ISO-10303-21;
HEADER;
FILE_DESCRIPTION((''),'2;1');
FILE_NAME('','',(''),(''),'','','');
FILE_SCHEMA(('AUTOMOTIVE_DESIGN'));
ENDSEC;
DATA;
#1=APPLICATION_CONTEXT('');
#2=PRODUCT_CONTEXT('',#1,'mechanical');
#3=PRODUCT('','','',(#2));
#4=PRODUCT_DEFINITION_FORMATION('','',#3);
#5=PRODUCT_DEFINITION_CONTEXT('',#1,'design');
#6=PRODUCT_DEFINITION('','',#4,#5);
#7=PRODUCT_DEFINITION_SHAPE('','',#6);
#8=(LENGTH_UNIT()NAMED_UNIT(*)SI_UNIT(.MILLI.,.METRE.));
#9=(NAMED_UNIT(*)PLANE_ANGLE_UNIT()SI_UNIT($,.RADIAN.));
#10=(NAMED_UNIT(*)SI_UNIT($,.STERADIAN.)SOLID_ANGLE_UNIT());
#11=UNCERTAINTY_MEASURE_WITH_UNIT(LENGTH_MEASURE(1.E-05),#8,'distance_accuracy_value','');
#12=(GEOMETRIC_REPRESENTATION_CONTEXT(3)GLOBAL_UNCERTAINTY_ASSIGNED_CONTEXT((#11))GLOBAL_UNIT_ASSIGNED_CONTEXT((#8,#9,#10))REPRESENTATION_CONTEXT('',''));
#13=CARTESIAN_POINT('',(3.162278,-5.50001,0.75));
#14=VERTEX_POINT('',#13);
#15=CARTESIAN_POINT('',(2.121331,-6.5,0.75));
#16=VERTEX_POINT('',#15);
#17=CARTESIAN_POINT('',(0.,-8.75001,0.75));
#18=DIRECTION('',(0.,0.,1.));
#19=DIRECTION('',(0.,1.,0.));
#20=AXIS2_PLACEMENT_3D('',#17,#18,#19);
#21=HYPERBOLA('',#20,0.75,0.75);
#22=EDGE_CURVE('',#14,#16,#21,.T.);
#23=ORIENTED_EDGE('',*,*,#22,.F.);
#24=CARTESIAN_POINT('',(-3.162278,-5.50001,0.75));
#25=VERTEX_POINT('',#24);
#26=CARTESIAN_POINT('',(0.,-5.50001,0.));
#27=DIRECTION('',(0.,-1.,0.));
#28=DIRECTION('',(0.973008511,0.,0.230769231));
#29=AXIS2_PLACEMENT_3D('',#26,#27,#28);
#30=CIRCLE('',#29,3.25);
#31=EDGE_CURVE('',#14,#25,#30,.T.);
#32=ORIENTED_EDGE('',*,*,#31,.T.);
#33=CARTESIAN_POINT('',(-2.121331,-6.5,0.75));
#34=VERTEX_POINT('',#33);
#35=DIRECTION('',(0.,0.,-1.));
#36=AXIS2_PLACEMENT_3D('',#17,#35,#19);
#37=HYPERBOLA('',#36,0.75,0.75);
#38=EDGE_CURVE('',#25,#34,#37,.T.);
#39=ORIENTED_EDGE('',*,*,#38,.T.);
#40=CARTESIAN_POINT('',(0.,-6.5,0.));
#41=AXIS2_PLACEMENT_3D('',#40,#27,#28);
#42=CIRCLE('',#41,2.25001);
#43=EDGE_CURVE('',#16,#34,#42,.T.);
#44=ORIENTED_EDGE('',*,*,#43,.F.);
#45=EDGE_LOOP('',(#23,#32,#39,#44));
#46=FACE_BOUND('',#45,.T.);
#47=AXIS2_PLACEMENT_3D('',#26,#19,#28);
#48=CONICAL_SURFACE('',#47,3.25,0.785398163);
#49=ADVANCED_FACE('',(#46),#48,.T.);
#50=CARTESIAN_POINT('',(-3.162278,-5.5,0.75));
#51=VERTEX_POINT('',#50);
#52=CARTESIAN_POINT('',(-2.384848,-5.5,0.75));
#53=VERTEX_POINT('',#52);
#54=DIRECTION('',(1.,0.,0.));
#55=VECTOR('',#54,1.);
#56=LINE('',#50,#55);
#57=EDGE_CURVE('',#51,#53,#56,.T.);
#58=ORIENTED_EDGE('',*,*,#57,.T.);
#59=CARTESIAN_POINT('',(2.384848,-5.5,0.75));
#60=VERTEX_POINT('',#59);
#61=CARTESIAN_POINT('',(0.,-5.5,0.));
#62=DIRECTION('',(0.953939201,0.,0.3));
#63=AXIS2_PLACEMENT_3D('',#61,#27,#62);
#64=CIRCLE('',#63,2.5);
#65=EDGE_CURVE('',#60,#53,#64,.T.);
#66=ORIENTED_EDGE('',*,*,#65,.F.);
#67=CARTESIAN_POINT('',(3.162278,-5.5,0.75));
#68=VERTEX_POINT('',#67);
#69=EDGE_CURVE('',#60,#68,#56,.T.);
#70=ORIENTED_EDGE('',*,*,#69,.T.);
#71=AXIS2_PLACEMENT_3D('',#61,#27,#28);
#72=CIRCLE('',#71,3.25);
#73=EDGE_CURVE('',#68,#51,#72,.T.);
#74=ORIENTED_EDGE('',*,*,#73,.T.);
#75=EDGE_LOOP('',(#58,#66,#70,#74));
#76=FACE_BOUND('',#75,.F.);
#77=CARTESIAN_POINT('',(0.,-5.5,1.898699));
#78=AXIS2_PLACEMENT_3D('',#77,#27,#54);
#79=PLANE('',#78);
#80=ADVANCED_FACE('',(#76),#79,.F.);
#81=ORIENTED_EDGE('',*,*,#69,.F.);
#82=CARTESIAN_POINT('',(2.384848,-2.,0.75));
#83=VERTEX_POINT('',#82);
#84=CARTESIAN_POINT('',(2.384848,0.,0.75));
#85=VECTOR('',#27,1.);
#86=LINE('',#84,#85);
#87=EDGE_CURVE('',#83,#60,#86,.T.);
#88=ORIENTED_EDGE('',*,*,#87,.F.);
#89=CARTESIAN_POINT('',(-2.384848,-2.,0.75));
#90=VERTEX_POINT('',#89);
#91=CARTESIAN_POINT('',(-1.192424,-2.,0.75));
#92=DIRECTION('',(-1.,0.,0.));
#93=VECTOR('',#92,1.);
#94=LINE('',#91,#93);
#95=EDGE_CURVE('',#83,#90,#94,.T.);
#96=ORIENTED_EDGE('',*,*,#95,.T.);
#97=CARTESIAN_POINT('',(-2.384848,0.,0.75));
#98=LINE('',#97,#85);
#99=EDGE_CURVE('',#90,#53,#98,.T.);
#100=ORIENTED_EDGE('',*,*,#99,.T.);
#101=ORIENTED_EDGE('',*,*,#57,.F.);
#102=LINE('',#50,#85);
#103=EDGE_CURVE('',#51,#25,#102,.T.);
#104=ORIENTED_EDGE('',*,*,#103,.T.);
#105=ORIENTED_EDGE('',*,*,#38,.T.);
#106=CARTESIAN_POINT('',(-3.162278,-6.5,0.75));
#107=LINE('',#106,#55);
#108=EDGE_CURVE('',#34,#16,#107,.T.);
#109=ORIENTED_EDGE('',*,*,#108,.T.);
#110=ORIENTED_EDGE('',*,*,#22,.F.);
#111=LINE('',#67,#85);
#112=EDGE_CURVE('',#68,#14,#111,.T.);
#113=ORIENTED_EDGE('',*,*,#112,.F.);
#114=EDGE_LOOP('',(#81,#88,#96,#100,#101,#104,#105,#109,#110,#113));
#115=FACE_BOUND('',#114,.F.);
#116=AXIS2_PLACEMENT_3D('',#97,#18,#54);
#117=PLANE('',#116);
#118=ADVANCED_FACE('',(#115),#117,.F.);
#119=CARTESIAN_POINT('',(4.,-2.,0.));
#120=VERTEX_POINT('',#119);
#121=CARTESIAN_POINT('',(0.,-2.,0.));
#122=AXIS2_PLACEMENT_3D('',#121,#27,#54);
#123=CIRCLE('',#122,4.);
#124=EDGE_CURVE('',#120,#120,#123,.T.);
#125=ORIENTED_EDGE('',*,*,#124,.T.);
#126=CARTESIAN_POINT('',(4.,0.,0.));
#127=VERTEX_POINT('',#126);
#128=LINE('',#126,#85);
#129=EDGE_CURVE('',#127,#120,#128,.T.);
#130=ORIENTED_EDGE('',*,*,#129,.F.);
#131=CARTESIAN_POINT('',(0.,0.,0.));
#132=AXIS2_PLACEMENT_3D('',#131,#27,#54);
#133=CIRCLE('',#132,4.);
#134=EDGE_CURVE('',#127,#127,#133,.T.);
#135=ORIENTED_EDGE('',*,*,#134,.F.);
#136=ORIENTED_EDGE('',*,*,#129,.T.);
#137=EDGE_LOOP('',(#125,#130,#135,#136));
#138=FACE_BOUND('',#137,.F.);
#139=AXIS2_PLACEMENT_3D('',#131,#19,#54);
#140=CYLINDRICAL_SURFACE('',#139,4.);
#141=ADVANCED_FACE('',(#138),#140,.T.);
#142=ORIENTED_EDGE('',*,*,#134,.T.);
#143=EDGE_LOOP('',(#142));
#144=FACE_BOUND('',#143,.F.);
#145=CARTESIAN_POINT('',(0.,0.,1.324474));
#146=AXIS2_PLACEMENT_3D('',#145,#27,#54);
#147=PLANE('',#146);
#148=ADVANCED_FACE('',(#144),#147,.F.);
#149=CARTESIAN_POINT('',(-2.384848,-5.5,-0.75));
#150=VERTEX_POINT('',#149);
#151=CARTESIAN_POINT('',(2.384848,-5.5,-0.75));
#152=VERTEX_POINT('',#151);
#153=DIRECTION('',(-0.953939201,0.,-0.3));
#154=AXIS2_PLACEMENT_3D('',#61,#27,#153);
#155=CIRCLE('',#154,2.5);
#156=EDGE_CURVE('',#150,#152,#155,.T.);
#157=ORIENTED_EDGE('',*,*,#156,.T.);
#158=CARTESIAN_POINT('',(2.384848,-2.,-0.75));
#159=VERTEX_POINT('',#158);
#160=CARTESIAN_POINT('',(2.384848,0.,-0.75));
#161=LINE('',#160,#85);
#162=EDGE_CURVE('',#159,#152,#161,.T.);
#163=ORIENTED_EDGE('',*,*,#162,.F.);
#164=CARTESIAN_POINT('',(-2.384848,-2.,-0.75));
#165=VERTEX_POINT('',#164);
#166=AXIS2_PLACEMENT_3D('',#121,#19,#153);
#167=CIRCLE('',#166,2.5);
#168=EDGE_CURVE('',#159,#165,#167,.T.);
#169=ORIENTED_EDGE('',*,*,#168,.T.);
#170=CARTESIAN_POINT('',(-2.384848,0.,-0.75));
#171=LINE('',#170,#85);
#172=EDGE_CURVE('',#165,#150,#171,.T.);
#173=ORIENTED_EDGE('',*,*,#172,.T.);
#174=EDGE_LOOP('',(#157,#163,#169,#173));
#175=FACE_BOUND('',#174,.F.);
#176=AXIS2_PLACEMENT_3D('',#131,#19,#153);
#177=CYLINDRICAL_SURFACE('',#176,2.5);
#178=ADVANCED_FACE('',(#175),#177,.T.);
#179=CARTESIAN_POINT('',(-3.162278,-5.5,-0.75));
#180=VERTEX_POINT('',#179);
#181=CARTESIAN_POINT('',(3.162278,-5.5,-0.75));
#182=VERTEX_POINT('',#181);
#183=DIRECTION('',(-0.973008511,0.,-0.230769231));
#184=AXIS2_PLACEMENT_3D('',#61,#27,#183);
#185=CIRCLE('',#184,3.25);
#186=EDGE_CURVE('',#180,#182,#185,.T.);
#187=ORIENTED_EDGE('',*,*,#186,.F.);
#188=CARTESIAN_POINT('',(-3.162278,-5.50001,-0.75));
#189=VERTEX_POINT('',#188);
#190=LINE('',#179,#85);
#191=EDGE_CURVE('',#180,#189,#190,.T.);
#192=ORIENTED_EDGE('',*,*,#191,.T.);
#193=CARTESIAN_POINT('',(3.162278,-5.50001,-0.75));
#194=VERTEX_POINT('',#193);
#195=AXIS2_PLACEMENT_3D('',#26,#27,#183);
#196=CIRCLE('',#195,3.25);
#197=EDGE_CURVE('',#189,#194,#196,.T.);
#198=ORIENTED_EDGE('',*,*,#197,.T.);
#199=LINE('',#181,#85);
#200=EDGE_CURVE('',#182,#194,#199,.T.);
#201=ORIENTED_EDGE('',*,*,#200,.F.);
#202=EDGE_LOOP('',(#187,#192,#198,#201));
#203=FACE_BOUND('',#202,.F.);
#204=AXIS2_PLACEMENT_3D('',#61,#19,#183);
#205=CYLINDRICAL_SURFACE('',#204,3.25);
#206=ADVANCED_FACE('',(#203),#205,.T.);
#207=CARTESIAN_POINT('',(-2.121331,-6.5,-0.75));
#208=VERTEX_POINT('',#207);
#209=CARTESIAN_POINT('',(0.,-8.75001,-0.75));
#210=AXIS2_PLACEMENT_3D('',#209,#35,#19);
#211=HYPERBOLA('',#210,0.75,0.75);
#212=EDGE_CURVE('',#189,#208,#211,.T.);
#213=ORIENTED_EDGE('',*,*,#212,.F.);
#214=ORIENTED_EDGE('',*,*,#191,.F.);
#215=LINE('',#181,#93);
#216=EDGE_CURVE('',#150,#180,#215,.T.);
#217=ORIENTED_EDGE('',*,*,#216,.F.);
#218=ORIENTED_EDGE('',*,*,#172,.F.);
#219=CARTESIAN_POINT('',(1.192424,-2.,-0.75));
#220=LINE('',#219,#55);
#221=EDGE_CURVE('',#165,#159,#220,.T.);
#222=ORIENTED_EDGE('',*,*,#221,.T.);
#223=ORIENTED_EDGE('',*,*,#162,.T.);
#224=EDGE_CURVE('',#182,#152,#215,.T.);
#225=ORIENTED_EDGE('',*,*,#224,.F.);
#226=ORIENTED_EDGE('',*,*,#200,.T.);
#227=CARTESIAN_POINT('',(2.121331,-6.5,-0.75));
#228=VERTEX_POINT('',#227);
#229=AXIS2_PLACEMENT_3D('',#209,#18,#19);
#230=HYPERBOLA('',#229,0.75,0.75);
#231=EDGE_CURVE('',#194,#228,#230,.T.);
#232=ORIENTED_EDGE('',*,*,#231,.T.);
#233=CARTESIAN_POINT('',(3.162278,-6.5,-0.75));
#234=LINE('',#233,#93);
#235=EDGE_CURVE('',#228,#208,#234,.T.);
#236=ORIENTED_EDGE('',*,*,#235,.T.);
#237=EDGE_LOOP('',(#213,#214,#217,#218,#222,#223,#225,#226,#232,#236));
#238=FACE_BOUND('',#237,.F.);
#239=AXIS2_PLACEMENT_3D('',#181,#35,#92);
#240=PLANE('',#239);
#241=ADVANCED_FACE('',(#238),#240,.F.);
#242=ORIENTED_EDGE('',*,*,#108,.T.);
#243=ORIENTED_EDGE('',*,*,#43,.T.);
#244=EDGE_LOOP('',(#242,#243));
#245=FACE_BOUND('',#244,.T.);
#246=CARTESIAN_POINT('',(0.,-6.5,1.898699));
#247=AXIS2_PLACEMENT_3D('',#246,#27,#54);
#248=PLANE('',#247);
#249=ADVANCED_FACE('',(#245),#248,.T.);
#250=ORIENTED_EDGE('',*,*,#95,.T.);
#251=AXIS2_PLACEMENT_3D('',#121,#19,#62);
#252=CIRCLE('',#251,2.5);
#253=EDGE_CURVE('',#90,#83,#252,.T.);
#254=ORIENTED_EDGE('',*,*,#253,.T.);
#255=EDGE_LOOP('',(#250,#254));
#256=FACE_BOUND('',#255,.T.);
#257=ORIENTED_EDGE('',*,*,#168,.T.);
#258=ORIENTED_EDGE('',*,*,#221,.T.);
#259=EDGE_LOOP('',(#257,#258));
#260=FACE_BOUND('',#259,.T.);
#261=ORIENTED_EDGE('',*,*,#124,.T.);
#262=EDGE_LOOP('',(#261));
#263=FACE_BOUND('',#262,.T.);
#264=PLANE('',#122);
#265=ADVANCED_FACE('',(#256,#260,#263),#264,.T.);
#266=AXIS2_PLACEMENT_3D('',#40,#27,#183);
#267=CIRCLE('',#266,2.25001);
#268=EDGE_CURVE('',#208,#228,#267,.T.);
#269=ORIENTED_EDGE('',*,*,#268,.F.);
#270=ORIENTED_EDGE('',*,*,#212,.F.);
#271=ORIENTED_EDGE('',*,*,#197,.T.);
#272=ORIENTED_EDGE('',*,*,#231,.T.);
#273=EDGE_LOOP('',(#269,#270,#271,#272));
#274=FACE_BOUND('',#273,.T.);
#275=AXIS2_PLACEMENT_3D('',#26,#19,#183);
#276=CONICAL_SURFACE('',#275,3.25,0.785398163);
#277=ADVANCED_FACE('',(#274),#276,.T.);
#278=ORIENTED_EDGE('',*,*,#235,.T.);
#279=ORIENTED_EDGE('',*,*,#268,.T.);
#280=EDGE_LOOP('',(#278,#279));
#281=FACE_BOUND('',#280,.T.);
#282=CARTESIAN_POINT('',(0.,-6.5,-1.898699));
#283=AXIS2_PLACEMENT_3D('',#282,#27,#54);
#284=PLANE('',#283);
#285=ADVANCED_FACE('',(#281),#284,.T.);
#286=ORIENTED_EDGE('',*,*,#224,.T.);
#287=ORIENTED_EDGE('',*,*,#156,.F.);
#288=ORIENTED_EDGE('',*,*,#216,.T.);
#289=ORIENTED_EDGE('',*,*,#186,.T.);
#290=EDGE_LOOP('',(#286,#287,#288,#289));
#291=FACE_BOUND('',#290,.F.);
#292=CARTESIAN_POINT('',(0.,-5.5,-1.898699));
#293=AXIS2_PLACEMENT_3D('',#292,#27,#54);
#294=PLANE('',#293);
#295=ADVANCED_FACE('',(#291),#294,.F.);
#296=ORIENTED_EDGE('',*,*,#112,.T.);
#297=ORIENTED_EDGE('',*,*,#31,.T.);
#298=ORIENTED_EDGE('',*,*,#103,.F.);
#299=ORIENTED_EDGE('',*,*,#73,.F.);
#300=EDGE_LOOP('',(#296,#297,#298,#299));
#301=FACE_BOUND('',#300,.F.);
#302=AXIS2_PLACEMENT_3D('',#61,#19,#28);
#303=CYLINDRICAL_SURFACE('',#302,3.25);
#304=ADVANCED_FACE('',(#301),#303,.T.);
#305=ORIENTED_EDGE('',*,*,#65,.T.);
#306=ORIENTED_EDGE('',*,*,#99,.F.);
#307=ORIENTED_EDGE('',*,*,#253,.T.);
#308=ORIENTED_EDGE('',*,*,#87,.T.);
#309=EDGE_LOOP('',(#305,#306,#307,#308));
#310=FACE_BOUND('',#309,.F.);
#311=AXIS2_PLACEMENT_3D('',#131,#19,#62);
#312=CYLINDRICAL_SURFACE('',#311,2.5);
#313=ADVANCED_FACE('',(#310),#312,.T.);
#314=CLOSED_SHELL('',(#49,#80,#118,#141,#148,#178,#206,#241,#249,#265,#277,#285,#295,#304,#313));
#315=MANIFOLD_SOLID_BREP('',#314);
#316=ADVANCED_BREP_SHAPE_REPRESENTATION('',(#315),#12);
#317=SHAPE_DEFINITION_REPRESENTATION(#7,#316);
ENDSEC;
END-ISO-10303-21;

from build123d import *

# Parameters (mm, degrees)
F0_R     = 4
F1_DEPTH = 2
F2_DEPTH = 5.5
F3_START = 5.5
F3_DEPTH = 1
F4_SIZE  = 0.99999


# Not quite as in the source:
# - a fillet or chamfer is up to 0.001 mm smaller than in the source, because OpenCascade refuses the exact size


with BuildPart() as f1:
    # F0 (on Front) → F1 (new body)
    with BuildSketch(Plane.XZ):
        Circle(F0_R)
        with BuildLine():
            ThreePointArc((-3.1622776602, 0.75), (0, 3.25), (3.1622776602, 0.75))
            Line((3.1622776602, 0.75), (3.5, 0.75))
            Line((3.5, 0.75), (3.5, -0.75))
            Line((3.5, -0.75), (3.1622776602, -0.75))
            ThreePointArc((3.1622776602, -0.75), (0, -3.25), (-3.1622776602, -0.75))
            Line((-3.1622776602, -0.75), (-3.5, -0.75))
            Line((-3.5, -0.75), (-3.5, 0.75))
            Line((-3.5, 0.75), (-3.1622776602, 0.75))
        make_face(mode=Mode.SUBTRACT)
        with BuildLine():
            ThreePointArc((2.3848480035, -0.75), (2.4710443145, -0.3793942482), (2.5, 0))
            ThreePointArc((2.5, 0), (2.4710443145, 0.3793942482), (2.3848480035, 0.75))
            Line((2.3848480035, 0.75), (-2.3848480035, 0.75))
            ThreePointArc((-2.3848480035, 0.75), (-2.5, 0), (-2.3848480035, -0.75))
            Line((-2.3848480035, -0.75), (2.3848480035, -0.75))
        make_face()
        with BuildLine():
            ThreePointArc((-2.3848480035, -0.75), (0, -2.5), (2.3848480035, -0.75))
            Line((2.3848480035, -0.75), (-2.3848480035, -0.75))
        make_face()
        with BuildLine():
            Line((-2.3848480035, 0.75), (2.3848480035, 0.75))
            ThreePointArc((2.3848480035, 0.75), (0, 2.5), (-2.3848480035, 0.75))
        make_face()
        with BuildLine():
            Line((3.1622776602, -0.75), (2.3848480035, -0.75))
            ThreePointArc((2.3848480035, -0.75), (0, -2.5), (-2.3848480035, -0.75))
            Line((-2.3848480035, -0.75), (-3.1622776602, -0.75))
            ThreePointArc((-3.1622776602, -0.75), (0, -3.25), (3.1622776602, -0.75))
        make_face()
        with BuildLine():
            ThreePointArc((-2.3848480035, 0.75), (0, 2.5), (2.3848480035, 0.75))
            Line((2.3848480035, 0.75), (3.1622776602, 0.75))
            ThreePointArc((3.1622776602, 0.75), (0, 3.25), (-3.1622776602, 0.75))
            Line((-3.1622776602, 0.75), (-2.3848480035, 0.75))
        make_face()
        with BuildLine():
            ThreePointArc((-2.3848480035, -0.75), (-2.5, 0), (-2.3848480035, 0.75))
            Line((-2.3848480035, 0.75), (-3.1622776602, 0.75))
            ThreePointArc((-3.1622776602, 0.75), (-3.25, 0), (-3.1622776602, -0.75))
            Line((-3.1622776602, -0.75), (-2.3848480035, -0.75))
        make_face()
        with BuildLine():
            ThreePointArc((2.3848480035, 0.75), (2.4710443145, 0.3793942482), (2.5, 0))
            ThreePointArc((2.5, 0), (2.4710443145, -0.3793942482), (2.3848480035, -0.75))
            Line((2.3848480035, -0.75), (3.1622776602, -0.75))
            ThreePointArc((3.1622776602, -0.75), (3.2279949191, -0.3775563564), (3.25, 0))
            ThreePointArc((3.25, 0), (3.2279949191, 0.3775563564), (3.1622776602, 0.75))
            Line((3.1622776602, 0.75), (2.3848480035, 0.75))
        make_face()
        with BuildLine():
            Line((3.5, 0.75), (3.1622776602, 0.75))
            ThreePointArc((3.1622776602, 0.75), (3.2279949191, 0.3775563564), (3.25, 0))
            ThreePointArc((3.25, 0), (3.2279949191, -0.3775563564), (3.1622776602, -0.75))
            Line((3.1622776602, -0.75), (3.5, -0.75))
            Line((3.5, -0.75), (3.5, 0.75))
        make_face()
        with BuildLine():
            ThreePointArc((-3.1622776602, -0.75), (-3.25, 0), (-3.1622776602, 0.75))
            Line((-3.1622776602, 0.75), (-3.5, 0.75))
            Line((-3.5, 0.75), (-3.5, -0.75))
            Line((-3.5, -0.75), (-3.1622776602, -0.75))
        make_face()
    extrude(amount=F1_DEPTH)

    # F0 (on Front) → F2 (join)
    with BuildSketch(Plane.XZ):
        with BuildLine():
            Line((-2.3848480035, 0.75), (2.3848480035, 0.75))
            ThreePointArc((2.3848480035, 0.75), (0, 2.5), (-2.3848480035, 0.75))
        make_face()
        with BuildLine():
            ThreePointArc((-2.3848480035, -0.75), (0, -2.5), (2.3848480035, -0.75))
            Line((2.3848480035, -0.75), (-2.3848480035, -0.75))
        make_face()
    extrude(amount=F2_DEPTH)

    # F0 (on Front) → F3 (join)
    with BuildSketch(Plane.XZ.offset(F3_START)):
        with BuildLine():
            Line((3.1622776602, -0.75), (2.3848480035, -0.75))
            ThreePointArc((2.3848480035, -0.75), (0, -2.5), (-2.3848480035, -0.75))
            Line((-2.3848480035, -0.75), (-3.1622776602, -0.75))
            ThreePointArc((-3.1622776602, -0.75), (0, -3.25), (3.1622776602, -0.75))
        make_face()
        with BuildLine():
            ThreePointArc((-2.3848480035, 0.75), (0, 2.5), (2.3848480035, 0.75))
            Line((2.3848480035, 0.75), (3.1622776602, 0.75))
            ThreePointArc((3.1622776602, 0.75), (0, 3.25), (-3.1622776602, 0.75))
            Line((-3.1622776602, 0.75), (-2.3848480035, 0.75))
        make_face()
        with BuildLine():
            Line((-2.3848480035, 0.75), (2.3848480035, 0.75))
            ThreePointArc((2.3848480035, 0.75), (0, 2.5), (-2.3848480035, 0.75))
        make_face()
        with BuildLine():
            ThreePointArc((-2.3848480035, -0.75), (0, -2.5), (2.3848480035, -0.75))
            Line((2.3848480035, -0.75), (-2.3848480035, -0.75))
        make_face()
    extrude(amount=F3_DEPTH)

    # F4 (size 1 in the source; OpenCascade refuses exactly that, so slightly less here)
    f4_edges = [f1.edges().sort_by_distance(p)[0] for p in [
        (0, -6.5, 3.25),
        (0, -6.5, -3.25),
    ]]
    chamfer(f4_edges, length=F4_SIZE)


solid = f1.part
